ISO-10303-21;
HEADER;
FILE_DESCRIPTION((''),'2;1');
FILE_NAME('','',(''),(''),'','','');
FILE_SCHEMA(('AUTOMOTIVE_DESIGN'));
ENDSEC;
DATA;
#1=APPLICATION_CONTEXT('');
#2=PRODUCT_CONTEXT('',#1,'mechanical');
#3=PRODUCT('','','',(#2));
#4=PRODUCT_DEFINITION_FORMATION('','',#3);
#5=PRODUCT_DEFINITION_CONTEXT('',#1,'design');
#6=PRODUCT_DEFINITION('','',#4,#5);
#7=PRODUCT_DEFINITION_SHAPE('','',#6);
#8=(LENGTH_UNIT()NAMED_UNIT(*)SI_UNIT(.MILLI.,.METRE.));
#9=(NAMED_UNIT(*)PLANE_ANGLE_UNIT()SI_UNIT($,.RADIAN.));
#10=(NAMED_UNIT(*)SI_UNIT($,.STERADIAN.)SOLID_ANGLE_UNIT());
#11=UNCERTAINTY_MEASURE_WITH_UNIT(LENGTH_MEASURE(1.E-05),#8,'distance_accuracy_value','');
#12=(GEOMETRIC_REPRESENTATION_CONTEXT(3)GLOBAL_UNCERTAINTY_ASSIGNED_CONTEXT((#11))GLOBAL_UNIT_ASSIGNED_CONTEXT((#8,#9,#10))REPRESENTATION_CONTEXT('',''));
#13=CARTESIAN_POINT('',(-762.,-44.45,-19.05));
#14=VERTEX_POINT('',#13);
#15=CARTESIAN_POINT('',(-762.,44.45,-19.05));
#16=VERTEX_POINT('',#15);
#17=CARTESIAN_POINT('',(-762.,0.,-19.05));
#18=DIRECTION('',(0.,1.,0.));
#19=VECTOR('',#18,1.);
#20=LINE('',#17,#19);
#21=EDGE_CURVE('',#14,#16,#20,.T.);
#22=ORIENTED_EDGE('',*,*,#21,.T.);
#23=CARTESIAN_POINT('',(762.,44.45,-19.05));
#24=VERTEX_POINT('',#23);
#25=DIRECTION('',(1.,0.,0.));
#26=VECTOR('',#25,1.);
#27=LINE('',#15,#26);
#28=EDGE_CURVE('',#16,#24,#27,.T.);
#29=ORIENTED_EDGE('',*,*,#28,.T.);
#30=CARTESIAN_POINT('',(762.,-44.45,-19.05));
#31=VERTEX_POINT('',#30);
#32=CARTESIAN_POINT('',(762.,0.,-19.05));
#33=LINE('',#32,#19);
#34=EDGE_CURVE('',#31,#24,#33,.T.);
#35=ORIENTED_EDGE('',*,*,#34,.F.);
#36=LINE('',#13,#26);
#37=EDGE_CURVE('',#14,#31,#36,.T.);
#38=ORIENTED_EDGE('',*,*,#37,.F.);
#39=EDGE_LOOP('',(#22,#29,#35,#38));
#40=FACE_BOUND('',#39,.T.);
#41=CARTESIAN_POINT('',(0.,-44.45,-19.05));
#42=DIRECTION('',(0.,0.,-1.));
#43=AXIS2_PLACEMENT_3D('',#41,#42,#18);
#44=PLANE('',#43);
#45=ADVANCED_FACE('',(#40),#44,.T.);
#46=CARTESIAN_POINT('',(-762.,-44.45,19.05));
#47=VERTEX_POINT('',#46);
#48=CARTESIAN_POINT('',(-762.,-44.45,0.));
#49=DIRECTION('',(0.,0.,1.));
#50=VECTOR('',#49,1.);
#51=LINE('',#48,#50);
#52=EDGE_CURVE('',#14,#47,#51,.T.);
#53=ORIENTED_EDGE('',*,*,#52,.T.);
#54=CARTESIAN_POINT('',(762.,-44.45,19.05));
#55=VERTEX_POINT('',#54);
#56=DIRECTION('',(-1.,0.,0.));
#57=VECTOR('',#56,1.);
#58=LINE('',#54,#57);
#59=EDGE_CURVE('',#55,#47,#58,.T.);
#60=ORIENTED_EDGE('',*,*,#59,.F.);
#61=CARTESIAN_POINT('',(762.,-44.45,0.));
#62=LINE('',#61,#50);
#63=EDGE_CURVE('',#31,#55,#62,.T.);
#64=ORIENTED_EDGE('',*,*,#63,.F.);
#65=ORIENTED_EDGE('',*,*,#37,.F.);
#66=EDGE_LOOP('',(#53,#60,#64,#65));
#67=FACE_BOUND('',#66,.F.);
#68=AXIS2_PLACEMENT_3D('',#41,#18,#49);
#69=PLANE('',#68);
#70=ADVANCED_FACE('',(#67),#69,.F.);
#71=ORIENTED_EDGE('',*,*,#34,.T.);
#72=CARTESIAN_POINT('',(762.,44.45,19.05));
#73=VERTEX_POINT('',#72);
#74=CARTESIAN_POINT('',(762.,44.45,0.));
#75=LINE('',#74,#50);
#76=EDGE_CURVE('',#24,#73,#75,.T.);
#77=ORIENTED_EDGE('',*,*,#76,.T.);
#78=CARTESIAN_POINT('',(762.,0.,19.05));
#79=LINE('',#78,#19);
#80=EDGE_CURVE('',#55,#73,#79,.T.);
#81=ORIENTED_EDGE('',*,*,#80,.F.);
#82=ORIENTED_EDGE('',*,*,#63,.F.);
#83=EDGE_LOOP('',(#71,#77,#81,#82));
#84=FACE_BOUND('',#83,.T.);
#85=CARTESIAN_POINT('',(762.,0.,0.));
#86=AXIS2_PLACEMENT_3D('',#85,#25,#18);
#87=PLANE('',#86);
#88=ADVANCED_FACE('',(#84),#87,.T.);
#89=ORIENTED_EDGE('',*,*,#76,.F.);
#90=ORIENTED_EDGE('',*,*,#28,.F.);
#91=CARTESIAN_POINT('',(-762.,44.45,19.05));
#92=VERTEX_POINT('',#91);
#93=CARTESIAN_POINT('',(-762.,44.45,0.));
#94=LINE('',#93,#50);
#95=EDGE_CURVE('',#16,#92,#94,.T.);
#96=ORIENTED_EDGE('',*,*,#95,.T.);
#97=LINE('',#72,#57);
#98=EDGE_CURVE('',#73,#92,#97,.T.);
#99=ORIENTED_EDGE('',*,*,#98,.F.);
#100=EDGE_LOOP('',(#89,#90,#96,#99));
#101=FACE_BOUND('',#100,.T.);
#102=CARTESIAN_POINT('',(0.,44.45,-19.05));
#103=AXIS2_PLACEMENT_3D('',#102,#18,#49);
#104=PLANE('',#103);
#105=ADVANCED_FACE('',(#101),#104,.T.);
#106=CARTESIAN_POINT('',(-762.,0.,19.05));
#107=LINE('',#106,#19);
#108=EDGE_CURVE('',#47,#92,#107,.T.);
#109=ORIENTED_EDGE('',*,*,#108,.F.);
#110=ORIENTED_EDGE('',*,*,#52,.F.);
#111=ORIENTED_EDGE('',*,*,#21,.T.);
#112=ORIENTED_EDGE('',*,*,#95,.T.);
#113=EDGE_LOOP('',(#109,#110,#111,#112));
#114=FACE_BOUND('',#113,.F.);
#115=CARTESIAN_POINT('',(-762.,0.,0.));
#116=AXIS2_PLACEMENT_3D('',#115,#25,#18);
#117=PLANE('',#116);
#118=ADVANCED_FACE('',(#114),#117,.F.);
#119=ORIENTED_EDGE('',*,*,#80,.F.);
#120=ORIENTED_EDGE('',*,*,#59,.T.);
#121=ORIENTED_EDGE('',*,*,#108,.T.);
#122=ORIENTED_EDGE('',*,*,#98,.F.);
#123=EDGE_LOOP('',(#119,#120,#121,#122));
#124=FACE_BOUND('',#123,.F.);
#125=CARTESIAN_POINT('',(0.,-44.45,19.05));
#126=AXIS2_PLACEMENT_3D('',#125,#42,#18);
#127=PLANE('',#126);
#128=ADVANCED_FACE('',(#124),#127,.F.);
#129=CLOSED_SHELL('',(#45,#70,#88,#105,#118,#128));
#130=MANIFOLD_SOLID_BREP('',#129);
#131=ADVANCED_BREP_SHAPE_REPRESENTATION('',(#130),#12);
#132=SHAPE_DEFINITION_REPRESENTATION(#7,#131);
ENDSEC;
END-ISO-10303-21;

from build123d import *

# Parameters (mm, degrees)
F1_W     = 88.9
F1_H     = 38.1
F2_DEPTH = 762


# Not quite as in the source:
# - a variable given as a bare number and used for a length is read in inches; the dataset says mm whatever the document's units were


with BuildPart() as f2:
    # F1 (on Right) → F2 (new body, symmetric)
    with BuildSketch(Plane.YZ):
        Rectangle(F1_W, F1_H)
    extrude(amount=F2_DEPTH, both=True)


solid = f2.part
